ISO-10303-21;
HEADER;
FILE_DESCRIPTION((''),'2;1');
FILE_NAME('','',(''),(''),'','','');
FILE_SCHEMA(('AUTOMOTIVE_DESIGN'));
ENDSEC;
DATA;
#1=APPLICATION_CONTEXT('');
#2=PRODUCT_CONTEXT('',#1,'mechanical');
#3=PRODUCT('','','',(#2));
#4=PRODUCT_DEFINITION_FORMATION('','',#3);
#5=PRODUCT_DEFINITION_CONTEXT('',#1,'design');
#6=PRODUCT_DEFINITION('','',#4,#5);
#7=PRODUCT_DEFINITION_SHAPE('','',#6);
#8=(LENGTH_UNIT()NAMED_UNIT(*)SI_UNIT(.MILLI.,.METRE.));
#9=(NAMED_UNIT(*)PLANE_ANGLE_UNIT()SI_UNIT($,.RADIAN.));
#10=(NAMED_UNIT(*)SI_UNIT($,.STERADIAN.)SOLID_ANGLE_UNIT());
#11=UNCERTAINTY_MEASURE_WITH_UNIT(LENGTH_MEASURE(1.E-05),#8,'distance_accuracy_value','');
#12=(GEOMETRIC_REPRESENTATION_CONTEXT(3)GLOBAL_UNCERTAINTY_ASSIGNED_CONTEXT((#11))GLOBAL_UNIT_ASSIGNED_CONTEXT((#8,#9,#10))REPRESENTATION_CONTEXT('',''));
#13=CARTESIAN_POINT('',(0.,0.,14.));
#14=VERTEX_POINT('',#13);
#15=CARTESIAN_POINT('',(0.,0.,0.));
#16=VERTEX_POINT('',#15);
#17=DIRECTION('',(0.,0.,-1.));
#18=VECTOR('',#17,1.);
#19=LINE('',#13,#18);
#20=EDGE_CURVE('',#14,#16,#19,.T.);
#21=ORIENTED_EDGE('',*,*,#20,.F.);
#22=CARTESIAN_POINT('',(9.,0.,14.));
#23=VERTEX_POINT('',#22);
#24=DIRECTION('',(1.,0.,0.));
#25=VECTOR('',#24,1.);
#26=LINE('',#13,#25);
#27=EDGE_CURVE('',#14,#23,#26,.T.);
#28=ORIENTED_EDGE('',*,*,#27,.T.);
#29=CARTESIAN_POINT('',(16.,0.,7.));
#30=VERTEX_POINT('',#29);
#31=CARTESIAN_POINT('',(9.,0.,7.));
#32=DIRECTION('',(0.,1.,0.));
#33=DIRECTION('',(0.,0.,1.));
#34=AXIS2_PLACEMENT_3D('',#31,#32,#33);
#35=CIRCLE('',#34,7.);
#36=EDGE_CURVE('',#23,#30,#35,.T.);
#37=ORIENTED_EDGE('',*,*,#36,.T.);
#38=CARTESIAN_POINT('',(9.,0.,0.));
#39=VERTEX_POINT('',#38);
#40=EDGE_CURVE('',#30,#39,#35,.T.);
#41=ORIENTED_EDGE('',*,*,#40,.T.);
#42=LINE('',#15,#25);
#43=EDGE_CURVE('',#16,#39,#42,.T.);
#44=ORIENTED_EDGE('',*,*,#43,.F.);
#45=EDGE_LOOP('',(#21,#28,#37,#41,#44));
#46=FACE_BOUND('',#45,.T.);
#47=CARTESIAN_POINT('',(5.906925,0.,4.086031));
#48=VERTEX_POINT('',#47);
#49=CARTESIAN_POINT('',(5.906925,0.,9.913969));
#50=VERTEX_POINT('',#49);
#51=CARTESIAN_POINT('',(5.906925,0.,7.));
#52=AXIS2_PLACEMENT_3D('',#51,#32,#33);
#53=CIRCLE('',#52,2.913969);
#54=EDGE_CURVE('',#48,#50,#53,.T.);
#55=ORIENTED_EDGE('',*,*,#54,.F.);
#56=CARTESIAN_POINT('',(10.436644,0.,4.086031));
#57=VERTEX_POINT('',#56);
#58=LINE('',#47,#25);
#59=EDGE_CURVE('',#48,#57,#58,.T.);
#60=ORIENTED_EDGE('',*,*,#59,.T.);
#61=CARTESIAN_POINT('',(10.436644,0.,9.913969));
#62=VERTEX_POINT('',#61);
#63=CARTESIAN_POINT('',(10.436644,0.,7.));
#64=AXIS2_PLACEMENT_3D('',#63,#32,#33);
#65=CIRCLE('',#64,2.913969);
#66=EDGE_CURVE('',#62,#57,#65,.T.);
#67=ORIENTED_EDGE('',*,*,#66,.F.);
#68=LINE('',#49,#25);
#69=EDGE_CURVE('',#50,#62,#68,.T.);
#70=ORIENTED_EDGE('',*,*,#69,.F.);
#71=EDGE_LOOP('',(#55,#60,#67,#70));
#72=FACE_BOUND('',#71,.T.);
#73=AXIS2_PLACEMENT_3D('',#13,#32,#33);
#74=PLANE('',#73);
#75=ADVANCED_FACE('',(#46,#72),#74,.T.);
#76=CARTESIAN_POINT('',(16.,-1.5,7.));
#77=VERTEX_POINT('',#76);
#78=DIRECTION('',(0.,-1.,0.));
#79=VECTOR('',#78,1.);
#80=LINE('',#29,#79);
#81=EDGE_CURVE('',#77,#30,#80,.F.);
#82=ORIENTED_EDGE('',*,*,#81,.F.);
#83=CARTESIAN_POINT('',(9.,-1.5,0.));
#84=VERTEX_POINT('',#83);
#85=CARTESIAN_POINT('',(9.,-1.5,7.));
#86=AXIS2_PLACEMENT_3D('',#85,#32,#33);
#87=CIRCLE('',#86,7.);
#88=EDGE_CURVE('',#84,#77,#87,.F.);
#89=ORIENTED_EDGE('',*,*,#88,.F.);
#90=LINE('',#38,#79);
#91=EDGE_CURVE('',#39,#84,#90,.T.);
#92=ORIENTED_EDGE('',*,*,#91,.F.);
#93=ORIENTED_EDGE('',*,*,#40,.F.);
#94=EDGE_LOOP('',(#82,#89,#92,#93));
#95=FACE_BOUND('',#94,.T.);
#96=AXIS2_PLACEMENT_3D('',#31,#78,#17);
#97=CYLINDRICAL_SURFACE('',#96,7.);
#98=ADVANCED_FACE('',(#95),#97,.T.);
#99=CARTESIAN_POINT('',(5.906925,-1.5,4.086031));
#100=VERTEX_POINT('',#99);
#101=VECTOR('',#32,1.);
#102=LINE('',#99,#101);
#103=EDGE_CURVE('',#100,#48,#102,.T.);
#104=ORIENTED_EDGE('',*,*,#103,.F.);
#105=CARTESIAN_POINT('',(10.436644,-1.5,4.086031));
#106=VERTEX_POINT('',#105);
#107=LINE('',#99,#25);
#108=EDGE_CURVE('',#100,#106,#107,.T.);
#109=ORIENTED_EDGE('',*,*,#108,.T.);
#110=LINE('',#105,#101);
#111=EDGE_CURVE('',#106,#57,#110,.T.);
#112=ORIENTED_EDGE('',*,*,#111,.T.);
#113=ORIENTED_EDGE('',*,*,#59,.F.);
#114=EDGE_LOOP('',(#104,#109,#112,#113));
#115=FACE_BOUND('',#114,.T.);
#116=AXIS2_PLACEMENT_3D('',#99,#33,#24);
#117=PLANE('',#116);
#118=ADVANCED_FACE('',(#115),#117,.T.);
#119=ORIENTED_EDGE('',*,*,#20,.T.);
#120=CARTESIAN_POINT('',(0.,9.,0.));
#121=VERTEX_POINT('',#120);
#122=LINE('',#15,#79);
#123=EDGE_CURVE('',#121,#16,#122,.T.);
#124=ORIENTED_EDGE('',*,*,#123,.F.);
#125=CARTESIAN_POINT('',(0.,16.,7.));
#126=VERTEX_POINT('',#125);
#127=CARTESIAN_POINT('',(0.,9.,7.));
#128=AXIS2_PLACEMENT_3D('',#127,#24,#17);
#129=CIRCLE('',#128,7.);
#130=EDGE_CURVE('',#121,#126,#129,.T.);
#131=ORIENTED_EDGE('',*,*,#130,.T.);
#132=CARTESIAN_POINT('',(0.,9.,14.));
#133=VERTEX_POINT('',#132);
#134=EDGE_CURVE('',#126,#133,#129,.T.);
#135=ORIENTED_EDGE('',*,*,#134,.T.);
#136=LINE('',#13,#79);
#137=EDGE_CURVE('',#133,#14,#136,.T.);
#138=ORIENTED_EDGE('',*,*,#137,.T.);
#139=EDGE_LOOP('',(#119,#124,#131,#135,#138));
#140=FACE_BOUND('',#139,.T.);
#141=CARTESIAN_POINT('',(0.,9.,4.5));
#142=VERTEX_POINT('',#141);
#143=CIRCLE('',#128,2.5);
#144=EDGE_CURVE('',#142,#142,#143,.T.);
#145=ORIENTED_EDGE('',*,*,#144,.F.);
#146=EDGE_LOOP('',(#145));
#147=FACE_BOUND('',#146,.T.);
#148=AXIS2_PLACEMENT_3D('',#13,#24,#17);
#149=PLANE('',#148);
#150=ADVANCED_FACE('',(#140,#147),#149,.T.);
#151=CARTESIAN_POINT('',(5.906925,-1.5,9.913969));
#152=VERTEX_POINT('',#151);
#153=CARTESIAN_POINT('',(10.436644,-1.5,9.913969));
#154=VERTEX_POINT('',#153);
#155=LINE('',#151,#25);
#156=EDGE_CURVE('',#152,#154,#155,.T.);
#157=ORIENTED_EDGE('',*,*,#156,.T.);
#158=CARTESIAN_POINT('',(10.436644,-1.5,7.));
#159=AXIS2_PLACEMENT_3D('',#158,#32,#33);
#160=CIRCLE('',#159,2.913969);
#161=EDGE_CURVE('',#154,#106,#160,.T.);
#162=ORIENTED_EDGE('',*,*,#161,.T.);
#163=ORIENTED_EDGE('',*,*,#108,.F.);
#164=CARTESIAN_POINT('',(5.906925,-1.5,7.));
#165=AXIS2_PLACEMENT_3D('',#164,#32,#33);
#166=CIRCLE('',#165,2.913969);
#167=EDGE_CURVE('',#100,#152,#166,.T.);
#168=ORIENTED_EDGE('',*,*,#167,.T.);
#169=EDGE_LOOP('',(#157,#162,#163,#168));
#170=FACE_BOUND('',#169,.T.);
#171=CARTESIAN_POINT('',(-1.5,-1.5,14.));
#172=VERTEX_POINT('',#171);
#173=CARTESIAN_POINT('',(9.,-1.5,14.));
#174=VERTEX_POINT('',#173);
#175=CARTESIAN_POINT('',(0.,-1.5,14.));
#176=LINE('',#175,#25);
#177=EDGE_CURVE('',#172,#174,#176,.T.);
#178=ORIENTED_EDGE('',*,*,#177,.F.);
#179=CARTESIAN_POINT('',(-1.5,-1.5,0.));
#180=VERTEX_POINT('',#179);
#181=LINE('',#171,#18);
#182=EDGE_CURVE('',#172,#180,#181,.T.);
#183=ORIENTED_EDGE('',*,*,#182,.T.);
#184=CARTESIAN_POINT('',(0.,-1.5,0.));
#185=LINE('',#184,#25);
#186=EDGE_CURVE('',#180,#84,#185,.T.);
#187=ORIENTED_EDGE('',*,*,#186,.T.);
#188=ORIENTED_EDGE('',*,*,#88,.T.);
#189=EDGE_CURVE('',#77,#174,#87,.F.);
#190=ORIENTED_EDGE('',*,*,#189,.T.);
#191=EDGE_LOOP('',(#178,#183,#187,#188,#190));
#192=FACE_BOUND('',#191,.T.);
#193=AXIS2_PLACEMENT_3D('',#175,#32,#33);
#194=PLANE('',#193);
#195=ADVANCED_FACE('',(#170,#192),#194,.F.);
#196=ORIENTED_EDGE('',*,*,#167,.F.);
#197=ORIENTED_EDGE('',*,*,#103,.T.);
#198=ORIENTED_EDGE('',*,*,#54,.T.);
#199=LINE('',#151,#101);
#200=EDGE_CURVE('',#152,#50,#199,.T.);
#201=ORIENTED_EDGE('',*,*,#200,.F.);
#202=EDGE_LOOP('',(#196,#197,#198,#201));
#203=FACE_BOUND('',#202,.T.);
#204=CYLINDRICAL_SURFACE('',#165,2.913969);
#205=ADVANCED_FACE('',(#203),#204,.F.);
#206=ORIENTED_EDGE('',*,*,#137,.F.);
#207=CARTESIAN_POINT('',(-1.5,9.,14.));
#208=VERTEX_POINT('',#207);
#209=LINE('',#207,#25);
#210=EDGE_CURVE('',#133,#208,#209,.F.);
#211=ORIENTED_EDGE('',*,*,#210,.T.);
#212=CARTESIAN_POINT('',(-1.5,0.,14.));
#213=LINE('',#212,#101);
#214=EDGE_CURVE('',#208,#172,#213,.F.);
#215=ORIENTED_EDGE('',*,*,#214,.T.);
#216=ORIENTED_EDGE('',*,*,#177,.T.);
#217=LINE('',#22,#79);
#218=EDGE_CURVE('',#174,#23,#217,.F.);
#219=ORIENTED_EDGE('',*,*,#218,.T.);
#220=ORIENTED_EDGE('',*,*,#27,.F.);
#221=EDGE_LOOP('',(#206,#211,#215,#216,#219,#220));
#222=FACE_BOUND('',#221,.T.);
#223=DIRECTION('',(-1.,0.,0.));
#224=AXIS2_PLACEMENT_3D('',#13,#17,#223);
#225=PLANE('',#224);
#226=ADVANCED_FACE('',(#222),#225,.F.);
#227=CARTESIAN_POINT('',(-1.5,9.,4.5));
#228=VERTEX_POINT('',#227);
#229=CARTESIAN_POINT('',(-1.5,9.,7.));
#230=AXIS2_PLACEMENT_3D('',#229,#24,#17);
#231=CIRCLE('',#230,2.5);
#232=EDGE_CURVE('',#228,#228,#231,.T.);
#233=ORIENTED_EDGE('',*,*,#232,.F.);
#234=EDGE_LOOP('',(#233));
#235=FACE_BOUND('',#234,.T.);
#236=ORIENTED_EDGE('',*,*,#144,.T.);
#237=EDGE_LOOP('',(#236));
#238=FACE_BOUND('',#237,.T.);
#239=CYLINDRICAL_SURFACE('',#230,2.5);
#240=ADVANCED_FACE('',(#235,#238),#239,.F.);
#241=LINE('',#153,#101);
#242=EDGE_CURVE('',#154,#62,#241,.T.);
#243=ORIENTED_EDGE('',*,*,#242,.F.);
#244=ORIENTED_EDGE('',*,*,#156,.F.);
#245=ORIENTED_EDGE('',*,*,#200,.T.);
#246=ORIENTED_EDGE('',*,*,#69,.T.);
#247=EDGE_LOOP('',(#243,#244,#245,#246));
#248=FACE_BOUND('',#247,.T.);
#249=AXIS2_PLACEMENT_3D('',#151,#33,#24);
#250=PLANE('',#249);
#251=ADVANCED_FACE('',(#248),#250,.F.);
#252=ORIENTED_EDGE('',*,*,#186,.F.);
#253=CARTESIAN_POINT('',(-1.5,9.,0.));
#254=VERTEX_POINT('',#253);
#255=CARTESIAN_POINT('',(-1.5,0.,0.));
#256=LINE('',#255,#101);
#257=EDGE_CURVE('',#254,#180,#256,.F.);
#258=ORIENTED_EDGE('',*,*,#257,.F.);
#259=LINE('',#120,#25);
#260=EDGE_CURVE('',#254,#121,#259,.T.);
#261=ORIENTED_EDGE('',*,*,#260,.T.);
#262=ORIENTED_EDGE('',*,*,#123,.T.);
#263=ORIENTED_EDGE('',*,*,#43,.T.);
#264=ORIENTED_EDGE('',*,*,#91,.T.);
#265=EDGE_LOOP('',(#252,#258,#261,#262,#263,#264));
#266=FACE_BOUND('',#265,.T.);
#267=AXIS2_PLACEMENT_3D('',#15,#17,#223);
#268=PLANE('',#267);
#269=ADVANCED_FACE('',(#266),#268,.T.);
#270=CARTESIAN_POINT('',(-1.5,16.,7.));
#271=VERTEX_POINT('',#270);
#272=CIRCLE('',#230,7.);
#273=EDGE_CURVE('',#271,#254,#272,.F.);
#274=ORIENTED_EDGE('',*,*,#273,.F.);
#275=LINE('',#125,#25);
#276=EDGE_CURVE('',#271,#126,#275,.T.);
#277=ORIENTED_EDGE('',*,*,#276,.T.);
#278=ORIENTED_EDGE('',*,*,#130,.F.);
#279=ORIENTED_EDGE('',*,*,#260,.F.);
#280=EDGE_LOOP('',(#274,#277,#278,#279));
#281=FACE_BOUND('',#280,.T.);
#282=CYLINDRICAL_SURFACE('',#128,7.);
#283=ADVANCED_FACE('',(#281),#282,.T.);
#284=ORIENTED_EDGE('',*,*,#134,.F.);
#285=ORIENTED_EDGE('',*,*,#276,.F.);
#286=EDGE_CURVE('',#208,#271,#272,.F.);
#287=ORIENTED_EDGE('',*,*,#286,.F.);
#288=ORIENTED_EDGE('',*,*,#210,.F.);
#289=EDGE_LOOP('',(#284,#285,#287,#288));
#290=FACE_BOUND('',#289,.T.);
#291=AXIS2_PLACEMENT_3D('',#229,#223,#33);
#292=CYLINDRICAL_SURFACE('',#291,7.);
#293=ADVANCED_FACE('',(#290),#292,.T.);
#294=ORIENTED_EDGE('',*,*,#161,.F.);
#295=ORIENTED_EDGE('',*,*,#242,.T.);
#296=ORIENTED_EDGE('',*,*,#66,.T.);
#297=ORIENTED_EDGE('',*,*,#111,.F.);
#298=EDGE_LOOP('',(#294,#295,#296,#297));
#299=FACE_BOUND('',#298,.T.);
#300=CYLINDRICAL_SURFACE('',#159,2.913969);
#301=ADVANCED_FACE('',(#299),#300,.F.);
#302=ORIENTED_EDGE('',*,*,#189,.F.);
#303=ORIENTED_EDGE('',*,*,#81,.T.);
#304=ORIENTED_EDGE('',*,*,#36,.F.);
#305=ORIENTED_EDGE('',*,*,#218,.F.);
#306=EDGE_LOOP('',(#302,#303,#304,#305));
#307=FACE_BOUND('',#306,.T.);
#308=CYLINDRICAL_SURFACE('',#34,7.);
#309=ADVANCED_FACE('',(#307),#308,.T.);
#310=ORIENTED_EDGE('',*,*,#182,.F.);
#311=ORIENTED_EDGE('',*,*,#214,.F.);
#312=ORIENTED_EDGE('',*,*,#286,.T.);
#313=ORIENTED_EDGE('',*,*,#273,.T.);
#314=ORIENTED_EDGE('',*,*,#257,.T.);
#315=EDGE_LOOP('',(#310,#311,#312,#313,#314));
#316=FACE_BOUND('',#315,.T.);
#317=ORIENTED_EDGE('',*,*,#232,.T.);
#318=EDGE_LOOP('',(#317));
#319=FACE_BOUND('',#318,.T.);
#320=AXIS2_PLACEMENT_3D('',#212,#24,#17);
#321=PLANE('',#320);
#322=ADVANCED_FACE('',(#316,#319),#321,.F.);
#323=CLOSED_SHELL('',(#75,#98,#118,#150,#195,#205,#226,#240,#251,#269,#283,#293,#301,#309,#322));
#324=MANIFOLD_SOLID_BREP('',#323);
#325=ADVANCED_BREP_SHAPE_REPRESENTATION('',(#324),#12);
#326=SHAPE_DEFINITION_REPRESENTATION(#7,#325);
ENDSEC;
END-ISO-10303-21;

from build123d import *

# Parameters (mm, degrees)
EXTRUDE_THIN1_DEPTH = 14
FILLET1_R           = 7
CUT_EXTRUDE1_DEPTH  = 27.608269391
SKETCH3_R           = 2.5
CUT_EXTRUDE2_DEPTH  = 27.608269391


with BuildPart() as part:
    # Sketch1 → Extrude-Thin1 (new body)
    with BuildSketch(Plane.XY):
        Polygon((16, 0), (0, 0), (0, 16), (-1.5, 16), (-1.5, -1.5), (16, -1.5), align=None)
    extrude(amount=EXTRUDE_THIN1_DEPTH)

    # Fillet1
    fillet1_edges = [part.edges().sort_by_distance(p)[0] for p in [
        (16, -0.75, 14),
        (16, -0.75, 0),
        (-0.75, 16, 0),
        (-0.75, 16, 14),
    ]]
    fillet(fillet1_edges, radius=FILLET1_R - 0.0001)  # a hair under: the kernel refuses the full size

    # Sketch2 → Cut-Extrude1 (cut, through all)
    with BuildSketch(Plane(origin=(0, 0, 0), x_dir=(1, 0, 0), z_dir=(0, 1, 0))):
        with BuildLine():
            Line((5.90692482, -4.08603122), (10.436644309, -4.08603122))
            ThreePointArc((10.436644309, -4.08603122), (13.350613089, -7), (10.436644309, -9.91396878))
            Line((10.436644309, -9.91396878), (5.90692482, -9.91396878))
            ThreePointArc((5.90692482, -9.91396878), (2.992956041, -7), (5.90692482, -4.08603122))
        make_face()
    extrude(amount=-CUT_EXTRUDE1_DEPTH, mode=Mode.SUBTRACT)

    # Sketch3 → Cut-Extrude2 (cut, through all)
    with BuildSketch(Plane(origin=(0, 0, 0), x_dir=(0, 0, -1), z_dir=(1, 0, 0))):
        with Locations((-7, 9)):
            Circle(SKETCH3_R)
    extrude(amount=-CUT_EXTRUDE2_DEPTH, mode=Mode.SUBTRACT)


solid = part.part
